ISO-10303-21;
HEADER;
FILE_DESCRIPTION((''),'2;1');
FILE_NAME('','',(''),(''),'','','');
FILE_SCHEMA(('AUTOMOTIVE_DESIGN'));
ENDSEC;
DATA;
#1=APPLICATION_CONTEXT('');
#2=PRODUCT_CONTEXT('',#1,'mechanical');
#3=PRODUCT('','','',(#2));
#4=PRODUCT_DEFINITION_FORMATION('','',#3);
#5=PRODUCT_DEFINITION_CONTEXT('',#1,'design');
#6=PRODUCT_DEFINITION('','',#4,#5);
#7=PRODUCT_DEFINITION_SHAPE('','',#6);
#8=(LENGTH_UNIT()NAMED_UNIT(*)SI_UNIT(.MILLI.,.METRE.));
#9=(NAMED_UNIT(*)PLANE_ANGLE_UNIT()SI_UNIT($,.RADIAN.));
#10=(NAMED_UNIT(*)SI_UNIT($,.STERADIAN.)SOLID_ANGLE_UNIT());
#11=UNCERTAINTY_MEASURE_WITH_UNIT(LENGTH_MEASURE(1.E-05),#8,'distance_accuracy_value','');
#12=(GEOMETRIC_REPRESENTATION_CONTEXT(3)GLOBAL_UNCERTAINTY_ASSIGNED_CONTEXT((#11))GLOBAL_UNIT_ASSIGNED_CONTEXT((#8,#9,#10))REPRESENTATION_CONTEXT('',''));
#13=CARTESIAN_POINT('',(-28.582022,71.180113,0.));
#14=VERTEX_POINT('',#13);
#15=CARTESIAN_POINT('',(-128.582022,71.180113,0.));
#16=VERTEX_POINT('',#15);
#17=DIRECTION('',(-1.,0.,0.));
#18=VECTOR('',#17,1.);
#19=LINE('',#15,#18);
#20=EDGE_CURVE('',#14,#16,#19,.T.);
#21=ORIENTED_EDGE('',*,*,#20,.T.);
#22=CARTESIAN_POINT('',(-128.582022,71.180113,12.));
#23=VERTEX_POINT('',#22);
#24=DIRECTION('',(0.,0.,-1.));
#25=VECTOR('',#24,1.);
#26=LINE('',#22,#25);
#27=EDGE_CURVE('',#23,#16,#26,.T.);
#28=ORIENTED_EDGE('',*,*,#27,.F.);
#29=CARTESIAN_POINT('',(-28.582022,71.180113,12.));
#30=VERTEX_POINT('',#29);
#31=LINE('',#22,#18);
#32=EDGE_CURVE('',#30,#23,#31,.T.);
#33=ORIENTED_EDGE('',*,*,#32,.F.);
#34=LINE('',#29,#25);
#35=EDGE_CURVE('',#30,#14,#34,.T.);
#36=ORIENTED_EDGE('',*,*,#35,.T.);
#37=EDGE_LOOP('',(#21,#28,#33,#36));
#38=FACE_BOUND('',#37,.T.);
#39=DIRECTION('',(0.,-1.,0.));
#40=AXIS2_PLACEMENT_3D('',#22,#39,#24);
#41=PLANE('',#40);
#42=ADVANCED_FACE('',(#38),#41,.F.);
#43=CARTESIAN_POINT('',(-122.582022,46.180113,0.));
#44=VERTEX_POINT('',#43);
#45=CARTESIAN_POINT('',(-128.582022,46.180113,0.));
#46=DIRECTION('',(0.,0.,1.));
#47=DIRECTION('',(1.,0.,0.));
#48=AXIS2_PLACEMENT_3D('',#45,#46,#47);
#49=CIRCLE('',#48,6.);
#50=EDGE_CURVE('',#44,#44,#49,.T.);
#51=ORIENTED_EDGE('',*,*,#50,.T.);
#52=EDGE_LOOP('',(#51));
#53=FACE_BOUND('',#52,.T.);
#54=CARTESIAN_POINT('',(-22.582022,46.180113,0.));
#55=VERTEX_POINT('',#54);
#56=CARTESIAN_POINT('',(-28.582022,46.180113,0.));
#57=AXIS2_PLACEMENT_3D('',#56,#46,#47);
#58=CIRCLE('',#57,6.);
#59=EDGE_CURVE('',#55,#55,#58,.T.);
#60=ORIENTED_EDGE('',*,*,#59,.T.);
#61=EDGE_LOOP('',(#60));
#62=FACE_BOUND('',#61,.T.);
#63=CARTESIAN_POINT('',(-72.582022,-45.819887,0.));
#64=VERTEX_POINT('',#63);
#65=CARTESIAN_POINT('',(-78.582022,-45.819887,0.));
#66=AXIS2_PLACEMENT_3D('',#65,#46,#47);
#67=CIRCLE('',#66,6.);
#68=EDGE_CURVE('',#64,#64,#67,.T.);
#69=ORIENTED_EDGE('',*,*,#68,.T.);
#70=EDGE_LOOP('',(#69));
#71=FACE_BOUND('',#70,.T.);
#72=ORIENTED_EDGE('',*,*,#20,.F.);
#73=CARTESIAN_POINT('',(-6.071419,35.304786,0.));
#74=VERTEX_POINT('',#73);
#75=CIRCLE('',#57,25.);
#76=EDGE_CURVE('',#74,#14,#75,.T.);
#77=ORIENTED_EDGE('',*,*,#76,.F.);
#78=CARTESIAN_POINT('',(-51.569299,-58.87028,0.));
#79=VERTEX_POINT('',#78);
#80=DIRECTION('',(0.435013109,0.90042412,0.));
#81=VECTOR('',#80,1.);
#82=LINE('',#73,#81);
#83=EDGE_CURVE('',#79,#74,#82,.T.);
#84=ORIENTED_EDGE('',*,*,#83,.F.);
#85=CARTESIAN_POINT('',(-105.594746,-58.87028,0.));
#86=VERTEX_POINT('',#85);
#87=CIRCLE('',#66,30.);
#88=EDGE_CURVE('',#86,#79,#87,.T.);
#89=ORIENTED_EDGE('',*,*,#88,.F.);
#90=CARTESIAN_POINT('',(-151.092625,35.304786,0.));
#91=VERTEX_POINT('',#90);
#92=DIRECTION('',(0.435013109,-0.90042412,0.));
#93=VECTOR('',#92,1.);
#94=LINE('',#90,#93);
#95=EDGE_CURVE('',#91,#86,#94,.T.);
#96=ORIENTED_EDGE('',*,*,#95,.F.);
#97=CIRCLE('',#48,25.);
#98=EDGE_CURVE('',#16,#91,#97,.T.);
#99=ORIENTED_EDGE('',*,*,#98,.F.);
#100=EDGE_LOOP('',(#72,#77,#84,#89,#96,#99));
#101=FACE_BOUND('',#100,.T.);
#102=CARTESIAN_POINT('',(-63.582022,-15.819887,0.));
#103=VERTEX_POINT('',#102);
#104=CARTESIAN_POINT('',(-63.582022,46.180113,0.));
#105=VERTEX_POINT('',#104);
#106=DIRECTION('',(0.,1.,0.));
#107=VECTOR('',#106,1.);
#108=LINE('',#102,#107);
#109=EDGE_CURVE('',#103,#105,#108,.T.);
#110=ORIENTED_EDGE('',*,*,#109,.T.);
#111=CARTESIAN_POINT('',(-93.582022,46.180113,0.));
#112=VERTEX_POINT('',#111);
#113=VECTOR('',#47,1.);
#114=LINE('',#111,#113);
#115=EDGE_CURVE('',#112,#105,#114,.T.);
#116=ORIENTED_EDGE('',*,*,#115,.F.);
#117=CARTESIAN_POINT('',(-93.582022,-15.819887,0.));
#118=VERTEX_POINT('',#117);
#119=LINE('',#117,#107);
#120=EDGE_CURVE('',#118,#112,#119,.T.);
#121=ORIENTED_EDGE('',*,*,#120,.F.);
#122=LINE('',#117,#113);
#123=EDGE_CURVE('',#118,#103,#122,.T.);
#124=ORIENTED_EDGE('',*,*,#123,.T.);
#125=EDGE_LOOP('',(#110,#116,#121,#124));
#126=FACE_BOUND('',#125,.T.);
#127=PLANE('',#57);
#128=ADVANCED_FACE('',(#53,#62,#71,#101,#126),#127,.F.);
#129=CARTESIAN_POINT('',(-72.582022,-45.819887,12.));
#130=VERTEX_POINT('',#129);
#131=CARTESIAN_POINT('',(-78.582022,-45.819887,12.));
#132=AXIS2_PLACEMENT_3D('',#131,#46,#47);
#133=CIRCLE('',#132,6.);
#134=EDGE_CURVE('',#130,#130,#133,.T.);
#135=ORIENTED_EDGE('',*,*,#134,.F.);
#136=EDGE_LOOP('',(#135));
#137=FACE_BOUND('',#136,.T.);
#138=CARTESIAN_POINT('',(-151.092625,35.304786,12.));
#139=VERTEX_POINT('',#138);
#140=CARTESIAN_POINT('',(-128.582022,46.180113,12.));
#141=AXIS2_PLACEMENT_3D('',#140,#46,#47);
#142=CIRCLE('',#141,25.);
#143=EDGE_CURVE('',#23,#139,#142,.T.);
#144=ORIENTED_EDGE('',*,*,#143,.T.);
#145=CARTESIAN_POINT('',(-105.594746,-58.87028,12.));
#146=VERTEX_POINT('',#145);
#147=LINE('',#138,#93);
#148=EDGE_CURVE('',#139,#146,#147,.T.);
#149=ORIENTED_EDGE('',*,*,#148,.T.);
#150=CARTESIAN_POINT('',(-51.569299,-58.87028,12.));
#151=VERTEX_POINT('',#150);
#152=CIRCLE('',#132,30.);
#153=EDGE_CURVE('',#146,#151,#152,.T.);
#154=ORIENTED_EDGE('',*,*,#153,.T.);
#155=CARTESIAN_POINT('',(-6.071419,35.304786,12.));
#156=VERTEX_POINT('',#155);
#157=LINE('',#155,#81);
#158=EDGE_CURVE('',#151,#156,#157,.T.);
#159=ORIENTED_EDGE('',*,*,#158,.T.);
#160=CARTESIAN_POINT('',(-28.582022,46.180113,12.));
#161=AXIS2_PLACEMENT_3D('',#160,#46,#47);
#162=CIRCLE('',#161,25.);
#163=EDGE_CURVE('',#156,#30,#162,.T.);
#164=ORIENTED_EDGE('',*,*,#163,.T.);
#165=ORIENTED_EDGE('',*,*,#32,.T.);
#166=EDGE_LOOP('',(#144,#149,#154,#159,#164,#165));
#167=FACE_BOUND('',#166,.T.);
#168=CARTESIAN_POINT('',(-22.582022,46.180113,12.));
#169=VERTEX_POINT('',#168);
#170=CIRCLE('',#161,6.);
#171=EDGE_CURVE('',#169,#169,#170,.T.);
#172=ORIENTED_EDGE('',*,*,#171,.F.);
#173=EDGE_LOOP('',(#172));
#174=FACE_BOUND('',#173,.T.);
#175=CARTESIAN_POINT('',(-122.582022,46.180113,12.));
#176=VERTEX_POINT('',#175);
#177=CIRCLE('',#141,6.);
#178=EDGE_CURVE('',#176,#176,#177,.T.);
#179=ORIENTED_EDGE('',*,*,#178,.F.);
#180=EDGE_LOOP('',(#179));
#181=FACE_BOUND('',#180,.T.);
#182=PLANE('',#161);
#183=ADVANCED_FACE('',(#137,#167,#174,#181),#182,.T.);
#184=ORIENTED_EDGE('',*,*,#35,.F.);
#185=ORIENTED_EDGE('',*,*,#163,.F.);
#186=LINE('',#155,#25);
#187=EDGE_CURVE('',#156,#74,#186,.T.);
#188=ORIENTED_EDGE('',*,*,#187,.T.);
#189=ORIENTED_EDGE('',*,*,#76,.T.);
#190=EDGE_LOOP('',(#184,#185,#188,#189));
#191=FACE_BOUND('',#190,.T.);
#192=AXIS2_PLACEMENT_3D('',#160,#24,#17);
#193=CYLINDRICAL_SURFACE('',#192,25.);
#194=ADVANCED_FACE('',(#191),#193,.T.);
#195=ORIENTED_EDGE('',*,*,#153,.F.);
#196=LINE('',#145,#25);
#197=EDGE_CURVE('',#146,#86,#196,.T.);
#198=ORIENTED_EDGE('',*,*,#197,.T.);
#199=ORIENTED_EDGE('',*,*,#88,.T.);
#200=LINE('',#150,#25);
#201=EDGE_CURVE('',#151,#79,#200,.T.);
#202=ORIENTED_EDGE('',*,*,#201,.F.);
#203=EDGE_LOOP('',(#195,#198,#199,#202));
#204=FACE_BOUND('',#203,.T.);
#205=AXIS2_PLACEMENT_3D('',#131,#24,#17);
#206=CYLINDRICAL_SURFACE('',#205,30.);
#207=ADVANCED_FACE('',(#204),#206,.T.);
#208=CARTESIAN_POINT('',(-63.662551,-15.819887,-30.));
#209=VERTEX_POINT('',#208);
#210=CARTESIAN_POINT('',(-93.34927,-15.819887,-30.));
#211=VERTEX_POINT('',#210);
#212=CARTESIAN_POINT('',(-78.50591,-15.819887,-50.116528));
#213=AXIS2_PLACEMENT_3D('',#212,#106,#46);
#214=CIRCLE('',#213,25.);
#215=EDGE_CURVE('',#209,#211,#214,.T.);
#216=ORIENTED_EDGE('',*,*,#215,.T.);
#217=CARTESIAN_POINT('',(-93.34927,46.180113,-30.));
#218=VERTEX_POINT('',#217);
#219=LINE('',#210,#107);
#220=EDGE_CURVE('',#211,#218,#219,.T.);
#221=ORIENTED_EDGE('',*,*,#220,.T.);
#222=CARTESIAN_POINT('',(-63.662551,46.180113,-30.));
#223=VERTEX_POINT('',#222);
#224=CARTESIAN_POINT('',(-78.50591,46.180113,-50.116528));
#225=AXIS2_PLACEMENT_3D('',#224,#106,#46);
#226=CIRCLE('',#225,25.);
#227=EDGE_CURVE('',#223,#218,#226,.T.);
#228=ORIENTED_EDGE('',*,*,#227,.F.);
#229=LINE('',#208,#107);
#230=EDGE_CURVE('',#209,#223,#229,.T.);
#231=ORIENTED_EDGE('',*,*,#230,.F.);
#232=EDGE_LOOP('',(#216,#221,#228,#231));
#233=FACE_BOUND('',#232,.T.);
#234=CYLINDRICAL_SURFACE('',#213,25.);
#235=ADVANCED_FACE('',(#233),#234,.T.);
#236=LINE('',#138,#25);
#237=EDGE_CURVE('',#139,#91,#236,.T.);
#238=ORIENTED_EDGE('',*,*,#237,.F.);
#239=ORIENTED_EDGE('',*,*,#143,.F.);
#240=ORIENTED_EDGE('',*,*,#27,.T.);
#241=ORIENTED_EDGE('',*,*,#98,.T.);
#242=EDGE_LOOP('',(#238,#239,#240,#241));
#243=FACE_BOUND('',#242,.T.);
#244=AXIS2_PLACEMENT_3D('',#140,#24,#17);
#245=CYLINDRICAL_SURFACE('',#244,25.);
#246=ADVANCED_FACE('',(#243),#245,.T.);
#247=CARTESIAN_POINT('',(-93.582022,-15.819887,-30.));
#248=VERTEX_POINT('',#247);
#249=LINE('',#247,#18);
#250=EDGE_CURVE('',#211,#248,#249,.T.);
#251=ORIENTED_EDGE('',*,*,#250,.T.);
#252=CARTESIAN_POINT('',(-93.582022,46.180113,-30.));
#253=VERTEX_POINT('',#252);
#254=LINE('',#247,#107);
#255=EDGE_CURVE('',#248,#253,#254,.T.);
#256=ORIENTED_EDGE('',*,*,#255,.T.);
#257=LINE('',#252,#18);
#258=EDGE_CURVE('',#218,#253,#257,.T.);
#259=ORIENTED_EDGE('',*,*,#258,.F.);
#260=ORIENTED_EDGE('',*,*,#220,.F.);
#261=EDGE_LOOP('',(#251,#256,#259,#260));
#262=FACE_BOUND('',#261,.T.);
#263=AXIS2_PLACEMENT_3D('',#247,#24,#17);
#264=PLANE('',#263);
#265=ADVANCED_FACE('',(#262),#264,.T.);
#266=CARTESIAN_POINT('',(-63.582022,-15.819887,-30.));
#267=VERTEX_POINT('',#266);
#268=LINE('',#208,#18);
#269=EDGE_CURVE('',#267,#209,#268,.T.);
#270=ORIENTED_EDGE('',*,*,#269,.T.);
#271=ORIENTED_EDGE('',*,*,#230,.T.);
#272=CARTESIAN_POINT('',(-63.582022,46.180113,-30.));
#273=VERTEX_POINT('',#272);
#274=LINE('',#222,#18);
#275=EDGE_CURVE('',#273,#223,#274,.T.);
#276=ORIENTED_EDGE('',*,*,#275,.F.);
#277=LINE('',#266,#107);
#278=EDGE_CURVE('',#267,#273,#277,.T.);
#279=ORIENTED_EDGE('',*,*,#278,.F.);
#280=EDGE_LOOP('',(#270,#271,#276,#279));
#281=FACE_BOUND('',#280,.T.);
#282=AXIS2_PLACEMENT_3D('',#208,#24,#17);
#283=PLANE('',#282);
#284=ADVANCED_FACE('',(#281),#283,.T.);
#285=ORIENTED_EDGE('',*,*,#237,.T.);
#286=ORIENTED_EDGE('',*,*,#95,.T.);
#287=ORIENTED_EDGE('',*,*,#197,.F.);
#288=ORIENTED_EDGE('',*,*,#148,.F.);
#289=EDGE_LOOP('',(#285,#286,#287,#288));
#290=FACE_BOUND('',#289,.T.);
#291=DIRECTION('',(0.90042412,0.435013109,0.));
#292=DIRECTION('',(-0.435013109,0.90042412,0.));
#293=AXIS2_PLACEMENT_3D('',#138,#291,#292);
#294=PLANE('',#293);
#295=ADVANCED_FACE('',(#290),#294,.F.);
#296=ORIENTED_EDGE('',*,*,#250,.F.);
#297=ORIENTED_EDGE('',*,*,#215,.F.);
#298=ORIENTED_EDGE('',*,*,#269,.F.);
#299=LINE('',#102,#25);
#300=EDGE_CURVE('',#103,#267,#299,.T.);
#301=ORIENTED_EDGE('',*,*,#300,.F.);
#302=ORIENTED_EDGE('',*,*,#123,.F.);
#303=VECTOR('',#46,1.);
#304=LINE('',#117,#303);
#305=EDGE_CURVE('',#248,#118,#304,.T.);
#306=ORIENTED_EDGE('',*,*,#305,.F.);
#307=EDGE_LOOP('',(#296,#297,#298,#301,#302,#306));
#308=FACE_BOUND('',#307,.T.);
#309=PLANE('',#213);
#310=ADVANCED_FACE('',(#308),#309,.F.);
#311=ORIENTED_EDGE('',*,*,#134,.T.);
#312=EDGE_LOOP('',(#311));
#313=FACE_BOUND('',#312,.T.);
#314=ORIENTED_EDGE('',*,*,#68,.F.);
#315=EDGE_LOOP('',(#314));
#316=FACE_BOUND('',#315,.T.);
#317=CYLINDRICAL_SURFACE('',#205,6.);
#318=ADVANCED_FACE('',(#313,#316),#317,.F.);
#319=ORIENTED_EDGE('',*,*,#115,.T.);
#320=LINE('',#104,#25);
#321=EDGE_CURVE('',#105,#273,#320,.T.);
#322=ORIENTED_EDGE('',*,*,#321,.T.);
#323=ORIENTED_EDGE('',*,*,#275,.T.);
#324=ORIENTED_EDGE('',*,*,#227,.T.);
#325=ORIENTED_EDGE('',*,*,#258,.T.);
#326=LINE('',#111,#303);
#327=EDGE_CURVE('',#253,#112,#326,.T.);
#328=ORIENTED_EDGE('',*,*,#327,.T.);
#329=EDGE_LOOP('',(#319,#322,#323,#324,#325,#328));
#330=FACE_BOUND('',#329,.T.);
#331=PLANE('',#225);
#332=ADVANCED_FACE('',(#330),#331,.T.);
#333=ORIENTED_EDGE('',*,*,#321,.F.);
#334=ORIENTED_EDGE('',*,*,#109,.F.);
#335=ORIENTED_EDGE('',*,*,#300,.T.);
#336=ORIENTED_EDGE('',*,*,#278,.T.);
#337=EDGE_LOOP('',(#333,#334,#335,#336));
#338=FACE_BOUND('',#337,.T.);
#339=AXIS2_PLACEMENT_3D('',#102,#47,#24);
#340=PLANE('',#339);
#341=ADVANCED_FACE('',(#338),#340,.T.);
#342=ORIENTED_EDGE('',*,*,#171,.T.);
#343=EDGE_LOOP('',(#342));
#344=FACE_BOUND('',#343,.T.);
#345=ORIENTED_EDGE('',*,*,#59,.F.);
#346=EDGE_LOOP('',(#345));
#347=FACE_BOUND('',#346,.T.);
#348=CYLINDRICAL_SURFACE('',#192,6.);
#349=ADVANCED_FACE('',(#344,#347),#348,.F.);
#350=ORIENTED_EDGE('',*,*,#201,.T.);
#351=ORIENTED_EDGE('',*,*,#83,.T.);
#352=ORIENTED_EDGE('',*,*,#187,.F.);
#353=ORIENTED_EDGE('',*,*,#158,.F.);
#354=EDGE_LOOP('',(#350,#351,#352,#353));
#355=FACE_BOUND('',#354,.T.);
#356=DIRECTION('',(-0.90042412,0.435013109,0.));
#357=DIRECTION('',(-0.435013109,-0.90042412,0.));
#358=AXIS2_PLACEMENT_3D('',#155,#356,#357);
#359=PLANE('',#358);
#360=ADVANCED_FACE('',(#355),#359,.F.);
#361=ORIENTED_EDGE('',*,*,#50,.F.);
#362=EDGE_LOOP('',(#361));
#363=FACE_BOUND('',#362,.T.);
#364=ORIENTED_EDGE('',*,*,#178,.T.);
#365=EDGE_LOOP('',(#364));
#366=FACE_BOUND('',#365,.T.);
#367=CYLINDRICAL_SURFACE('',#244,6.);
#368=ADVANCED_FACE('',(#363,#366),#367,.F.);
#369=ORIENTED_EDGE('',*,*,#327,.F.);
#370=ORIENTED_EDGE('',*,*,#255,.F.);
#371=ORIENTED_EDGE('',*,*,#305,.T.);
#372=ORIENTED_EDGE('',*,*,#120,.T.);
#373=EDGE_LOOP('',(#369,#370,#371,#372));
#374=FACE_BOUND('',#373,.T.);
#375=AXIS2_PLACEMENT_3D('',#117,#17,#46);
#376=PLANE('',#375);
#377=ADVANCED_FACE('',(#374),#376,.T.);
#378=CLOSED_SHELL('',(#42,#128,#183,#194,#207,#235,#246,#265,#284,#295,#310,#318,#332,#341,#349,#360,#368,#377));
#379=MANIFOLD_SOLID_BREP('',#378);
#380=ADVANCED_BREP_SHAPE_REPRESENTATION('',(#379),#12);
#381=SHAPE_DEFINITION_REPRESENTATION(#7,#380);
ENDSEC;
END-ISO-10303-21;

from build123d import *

# Parameters (mm, degrees)
Y_KSEKLIK_EKSTR_ZYON1_OUTLINE_R = 6
Y_KSEKLIK_EKSTR_ZYON1_DEPTH     = 12
Y_KSEKLIK_EKSTR_ZYON6_DEPTH     = 62


# Read off the part's stored shape, not the designer's step: Yükseklik-Ekstrüzyon1
with BuildPart() as part:
    # Yükseklik-Ekstrüzyon1 outline → Yükseklik-Ekstrüzyon1 (new body)
    with BuildSketch(Plane.XY):
        with BuildLine():
            ThreePointArc((-6.071419214, 35.304785694), (-7.405582554, 59.467641529), (-28.582022208, 71.180113408))
            Line((-28.582022208, 71.180113408), (-128.582022208, 71.180113408))
            ThreePointArc((-128.582022208, 71.180113408), (-149.758461862, 59.467641529), (-151.092625201, 35.304785694))
            Line((-151.092625201, 35.304785694), (-105.594745799, -58.870279849))
            ThreePointArc((-105.594745799, -58.870279849), (-78.582022207, -75.819886592), (-51.569298616, -58.870279849))
            Line((-51.569298616, -58.870279849), (-6.071419214, 35.304785694))
        make_face()
        with Locations((-78.582022208, -45.819886592)):
            Circle(Y_KSEKLIK_EKSTR_ZYON1_OUTLINE_R, mode=Mode.SUBTRACT)
        with Locations((-128.582022208, 46.180113408)):
            Circle(Y_KSEKLIK_EKSTR_ZYON1_OUTLINE_R, mode=Mode.SUBTRACT)
        with Locations((-28.582022208, 46.180113408)):
            Circle(Y_KSEKLIK_EKSTR_ZYON1_OUTLINE_R, mode=Mode.SUBTRACT)
    extrude(amount=Y_KSEKLIK_EKSTR_ZYON1_DEPTH)

    # Çizim6 → Yükseklik-Ekstrüzyon6 (add)
    with BuildSketch(Plane(origin=(0, 46.180113408, 0), x_dir=(1, 0, 0), z_dir=(0, 1, 0))):
        with BuildLine():
            Line((-93.582022208, 0), (-63.582022208, 0))
            Line((-63.582022208, 0), (-63.582022208, 30))
            Line((-63.582022208, 30), (-63.662550873, 30))
            ThreePointArc((-63.662550873, 30), (-78.505910332, 75.116527532), (-93.349269791, 30))
            Line((-93.349269791, 30), (-93.582022208, 30))
            Line((-93.582022208, 30), (-93.582022208, 0))
        make_face()
    extrude(amount=-Y_KSEKLIK_EKSTR_ZYON6_DEPTH)


solid = part.part
